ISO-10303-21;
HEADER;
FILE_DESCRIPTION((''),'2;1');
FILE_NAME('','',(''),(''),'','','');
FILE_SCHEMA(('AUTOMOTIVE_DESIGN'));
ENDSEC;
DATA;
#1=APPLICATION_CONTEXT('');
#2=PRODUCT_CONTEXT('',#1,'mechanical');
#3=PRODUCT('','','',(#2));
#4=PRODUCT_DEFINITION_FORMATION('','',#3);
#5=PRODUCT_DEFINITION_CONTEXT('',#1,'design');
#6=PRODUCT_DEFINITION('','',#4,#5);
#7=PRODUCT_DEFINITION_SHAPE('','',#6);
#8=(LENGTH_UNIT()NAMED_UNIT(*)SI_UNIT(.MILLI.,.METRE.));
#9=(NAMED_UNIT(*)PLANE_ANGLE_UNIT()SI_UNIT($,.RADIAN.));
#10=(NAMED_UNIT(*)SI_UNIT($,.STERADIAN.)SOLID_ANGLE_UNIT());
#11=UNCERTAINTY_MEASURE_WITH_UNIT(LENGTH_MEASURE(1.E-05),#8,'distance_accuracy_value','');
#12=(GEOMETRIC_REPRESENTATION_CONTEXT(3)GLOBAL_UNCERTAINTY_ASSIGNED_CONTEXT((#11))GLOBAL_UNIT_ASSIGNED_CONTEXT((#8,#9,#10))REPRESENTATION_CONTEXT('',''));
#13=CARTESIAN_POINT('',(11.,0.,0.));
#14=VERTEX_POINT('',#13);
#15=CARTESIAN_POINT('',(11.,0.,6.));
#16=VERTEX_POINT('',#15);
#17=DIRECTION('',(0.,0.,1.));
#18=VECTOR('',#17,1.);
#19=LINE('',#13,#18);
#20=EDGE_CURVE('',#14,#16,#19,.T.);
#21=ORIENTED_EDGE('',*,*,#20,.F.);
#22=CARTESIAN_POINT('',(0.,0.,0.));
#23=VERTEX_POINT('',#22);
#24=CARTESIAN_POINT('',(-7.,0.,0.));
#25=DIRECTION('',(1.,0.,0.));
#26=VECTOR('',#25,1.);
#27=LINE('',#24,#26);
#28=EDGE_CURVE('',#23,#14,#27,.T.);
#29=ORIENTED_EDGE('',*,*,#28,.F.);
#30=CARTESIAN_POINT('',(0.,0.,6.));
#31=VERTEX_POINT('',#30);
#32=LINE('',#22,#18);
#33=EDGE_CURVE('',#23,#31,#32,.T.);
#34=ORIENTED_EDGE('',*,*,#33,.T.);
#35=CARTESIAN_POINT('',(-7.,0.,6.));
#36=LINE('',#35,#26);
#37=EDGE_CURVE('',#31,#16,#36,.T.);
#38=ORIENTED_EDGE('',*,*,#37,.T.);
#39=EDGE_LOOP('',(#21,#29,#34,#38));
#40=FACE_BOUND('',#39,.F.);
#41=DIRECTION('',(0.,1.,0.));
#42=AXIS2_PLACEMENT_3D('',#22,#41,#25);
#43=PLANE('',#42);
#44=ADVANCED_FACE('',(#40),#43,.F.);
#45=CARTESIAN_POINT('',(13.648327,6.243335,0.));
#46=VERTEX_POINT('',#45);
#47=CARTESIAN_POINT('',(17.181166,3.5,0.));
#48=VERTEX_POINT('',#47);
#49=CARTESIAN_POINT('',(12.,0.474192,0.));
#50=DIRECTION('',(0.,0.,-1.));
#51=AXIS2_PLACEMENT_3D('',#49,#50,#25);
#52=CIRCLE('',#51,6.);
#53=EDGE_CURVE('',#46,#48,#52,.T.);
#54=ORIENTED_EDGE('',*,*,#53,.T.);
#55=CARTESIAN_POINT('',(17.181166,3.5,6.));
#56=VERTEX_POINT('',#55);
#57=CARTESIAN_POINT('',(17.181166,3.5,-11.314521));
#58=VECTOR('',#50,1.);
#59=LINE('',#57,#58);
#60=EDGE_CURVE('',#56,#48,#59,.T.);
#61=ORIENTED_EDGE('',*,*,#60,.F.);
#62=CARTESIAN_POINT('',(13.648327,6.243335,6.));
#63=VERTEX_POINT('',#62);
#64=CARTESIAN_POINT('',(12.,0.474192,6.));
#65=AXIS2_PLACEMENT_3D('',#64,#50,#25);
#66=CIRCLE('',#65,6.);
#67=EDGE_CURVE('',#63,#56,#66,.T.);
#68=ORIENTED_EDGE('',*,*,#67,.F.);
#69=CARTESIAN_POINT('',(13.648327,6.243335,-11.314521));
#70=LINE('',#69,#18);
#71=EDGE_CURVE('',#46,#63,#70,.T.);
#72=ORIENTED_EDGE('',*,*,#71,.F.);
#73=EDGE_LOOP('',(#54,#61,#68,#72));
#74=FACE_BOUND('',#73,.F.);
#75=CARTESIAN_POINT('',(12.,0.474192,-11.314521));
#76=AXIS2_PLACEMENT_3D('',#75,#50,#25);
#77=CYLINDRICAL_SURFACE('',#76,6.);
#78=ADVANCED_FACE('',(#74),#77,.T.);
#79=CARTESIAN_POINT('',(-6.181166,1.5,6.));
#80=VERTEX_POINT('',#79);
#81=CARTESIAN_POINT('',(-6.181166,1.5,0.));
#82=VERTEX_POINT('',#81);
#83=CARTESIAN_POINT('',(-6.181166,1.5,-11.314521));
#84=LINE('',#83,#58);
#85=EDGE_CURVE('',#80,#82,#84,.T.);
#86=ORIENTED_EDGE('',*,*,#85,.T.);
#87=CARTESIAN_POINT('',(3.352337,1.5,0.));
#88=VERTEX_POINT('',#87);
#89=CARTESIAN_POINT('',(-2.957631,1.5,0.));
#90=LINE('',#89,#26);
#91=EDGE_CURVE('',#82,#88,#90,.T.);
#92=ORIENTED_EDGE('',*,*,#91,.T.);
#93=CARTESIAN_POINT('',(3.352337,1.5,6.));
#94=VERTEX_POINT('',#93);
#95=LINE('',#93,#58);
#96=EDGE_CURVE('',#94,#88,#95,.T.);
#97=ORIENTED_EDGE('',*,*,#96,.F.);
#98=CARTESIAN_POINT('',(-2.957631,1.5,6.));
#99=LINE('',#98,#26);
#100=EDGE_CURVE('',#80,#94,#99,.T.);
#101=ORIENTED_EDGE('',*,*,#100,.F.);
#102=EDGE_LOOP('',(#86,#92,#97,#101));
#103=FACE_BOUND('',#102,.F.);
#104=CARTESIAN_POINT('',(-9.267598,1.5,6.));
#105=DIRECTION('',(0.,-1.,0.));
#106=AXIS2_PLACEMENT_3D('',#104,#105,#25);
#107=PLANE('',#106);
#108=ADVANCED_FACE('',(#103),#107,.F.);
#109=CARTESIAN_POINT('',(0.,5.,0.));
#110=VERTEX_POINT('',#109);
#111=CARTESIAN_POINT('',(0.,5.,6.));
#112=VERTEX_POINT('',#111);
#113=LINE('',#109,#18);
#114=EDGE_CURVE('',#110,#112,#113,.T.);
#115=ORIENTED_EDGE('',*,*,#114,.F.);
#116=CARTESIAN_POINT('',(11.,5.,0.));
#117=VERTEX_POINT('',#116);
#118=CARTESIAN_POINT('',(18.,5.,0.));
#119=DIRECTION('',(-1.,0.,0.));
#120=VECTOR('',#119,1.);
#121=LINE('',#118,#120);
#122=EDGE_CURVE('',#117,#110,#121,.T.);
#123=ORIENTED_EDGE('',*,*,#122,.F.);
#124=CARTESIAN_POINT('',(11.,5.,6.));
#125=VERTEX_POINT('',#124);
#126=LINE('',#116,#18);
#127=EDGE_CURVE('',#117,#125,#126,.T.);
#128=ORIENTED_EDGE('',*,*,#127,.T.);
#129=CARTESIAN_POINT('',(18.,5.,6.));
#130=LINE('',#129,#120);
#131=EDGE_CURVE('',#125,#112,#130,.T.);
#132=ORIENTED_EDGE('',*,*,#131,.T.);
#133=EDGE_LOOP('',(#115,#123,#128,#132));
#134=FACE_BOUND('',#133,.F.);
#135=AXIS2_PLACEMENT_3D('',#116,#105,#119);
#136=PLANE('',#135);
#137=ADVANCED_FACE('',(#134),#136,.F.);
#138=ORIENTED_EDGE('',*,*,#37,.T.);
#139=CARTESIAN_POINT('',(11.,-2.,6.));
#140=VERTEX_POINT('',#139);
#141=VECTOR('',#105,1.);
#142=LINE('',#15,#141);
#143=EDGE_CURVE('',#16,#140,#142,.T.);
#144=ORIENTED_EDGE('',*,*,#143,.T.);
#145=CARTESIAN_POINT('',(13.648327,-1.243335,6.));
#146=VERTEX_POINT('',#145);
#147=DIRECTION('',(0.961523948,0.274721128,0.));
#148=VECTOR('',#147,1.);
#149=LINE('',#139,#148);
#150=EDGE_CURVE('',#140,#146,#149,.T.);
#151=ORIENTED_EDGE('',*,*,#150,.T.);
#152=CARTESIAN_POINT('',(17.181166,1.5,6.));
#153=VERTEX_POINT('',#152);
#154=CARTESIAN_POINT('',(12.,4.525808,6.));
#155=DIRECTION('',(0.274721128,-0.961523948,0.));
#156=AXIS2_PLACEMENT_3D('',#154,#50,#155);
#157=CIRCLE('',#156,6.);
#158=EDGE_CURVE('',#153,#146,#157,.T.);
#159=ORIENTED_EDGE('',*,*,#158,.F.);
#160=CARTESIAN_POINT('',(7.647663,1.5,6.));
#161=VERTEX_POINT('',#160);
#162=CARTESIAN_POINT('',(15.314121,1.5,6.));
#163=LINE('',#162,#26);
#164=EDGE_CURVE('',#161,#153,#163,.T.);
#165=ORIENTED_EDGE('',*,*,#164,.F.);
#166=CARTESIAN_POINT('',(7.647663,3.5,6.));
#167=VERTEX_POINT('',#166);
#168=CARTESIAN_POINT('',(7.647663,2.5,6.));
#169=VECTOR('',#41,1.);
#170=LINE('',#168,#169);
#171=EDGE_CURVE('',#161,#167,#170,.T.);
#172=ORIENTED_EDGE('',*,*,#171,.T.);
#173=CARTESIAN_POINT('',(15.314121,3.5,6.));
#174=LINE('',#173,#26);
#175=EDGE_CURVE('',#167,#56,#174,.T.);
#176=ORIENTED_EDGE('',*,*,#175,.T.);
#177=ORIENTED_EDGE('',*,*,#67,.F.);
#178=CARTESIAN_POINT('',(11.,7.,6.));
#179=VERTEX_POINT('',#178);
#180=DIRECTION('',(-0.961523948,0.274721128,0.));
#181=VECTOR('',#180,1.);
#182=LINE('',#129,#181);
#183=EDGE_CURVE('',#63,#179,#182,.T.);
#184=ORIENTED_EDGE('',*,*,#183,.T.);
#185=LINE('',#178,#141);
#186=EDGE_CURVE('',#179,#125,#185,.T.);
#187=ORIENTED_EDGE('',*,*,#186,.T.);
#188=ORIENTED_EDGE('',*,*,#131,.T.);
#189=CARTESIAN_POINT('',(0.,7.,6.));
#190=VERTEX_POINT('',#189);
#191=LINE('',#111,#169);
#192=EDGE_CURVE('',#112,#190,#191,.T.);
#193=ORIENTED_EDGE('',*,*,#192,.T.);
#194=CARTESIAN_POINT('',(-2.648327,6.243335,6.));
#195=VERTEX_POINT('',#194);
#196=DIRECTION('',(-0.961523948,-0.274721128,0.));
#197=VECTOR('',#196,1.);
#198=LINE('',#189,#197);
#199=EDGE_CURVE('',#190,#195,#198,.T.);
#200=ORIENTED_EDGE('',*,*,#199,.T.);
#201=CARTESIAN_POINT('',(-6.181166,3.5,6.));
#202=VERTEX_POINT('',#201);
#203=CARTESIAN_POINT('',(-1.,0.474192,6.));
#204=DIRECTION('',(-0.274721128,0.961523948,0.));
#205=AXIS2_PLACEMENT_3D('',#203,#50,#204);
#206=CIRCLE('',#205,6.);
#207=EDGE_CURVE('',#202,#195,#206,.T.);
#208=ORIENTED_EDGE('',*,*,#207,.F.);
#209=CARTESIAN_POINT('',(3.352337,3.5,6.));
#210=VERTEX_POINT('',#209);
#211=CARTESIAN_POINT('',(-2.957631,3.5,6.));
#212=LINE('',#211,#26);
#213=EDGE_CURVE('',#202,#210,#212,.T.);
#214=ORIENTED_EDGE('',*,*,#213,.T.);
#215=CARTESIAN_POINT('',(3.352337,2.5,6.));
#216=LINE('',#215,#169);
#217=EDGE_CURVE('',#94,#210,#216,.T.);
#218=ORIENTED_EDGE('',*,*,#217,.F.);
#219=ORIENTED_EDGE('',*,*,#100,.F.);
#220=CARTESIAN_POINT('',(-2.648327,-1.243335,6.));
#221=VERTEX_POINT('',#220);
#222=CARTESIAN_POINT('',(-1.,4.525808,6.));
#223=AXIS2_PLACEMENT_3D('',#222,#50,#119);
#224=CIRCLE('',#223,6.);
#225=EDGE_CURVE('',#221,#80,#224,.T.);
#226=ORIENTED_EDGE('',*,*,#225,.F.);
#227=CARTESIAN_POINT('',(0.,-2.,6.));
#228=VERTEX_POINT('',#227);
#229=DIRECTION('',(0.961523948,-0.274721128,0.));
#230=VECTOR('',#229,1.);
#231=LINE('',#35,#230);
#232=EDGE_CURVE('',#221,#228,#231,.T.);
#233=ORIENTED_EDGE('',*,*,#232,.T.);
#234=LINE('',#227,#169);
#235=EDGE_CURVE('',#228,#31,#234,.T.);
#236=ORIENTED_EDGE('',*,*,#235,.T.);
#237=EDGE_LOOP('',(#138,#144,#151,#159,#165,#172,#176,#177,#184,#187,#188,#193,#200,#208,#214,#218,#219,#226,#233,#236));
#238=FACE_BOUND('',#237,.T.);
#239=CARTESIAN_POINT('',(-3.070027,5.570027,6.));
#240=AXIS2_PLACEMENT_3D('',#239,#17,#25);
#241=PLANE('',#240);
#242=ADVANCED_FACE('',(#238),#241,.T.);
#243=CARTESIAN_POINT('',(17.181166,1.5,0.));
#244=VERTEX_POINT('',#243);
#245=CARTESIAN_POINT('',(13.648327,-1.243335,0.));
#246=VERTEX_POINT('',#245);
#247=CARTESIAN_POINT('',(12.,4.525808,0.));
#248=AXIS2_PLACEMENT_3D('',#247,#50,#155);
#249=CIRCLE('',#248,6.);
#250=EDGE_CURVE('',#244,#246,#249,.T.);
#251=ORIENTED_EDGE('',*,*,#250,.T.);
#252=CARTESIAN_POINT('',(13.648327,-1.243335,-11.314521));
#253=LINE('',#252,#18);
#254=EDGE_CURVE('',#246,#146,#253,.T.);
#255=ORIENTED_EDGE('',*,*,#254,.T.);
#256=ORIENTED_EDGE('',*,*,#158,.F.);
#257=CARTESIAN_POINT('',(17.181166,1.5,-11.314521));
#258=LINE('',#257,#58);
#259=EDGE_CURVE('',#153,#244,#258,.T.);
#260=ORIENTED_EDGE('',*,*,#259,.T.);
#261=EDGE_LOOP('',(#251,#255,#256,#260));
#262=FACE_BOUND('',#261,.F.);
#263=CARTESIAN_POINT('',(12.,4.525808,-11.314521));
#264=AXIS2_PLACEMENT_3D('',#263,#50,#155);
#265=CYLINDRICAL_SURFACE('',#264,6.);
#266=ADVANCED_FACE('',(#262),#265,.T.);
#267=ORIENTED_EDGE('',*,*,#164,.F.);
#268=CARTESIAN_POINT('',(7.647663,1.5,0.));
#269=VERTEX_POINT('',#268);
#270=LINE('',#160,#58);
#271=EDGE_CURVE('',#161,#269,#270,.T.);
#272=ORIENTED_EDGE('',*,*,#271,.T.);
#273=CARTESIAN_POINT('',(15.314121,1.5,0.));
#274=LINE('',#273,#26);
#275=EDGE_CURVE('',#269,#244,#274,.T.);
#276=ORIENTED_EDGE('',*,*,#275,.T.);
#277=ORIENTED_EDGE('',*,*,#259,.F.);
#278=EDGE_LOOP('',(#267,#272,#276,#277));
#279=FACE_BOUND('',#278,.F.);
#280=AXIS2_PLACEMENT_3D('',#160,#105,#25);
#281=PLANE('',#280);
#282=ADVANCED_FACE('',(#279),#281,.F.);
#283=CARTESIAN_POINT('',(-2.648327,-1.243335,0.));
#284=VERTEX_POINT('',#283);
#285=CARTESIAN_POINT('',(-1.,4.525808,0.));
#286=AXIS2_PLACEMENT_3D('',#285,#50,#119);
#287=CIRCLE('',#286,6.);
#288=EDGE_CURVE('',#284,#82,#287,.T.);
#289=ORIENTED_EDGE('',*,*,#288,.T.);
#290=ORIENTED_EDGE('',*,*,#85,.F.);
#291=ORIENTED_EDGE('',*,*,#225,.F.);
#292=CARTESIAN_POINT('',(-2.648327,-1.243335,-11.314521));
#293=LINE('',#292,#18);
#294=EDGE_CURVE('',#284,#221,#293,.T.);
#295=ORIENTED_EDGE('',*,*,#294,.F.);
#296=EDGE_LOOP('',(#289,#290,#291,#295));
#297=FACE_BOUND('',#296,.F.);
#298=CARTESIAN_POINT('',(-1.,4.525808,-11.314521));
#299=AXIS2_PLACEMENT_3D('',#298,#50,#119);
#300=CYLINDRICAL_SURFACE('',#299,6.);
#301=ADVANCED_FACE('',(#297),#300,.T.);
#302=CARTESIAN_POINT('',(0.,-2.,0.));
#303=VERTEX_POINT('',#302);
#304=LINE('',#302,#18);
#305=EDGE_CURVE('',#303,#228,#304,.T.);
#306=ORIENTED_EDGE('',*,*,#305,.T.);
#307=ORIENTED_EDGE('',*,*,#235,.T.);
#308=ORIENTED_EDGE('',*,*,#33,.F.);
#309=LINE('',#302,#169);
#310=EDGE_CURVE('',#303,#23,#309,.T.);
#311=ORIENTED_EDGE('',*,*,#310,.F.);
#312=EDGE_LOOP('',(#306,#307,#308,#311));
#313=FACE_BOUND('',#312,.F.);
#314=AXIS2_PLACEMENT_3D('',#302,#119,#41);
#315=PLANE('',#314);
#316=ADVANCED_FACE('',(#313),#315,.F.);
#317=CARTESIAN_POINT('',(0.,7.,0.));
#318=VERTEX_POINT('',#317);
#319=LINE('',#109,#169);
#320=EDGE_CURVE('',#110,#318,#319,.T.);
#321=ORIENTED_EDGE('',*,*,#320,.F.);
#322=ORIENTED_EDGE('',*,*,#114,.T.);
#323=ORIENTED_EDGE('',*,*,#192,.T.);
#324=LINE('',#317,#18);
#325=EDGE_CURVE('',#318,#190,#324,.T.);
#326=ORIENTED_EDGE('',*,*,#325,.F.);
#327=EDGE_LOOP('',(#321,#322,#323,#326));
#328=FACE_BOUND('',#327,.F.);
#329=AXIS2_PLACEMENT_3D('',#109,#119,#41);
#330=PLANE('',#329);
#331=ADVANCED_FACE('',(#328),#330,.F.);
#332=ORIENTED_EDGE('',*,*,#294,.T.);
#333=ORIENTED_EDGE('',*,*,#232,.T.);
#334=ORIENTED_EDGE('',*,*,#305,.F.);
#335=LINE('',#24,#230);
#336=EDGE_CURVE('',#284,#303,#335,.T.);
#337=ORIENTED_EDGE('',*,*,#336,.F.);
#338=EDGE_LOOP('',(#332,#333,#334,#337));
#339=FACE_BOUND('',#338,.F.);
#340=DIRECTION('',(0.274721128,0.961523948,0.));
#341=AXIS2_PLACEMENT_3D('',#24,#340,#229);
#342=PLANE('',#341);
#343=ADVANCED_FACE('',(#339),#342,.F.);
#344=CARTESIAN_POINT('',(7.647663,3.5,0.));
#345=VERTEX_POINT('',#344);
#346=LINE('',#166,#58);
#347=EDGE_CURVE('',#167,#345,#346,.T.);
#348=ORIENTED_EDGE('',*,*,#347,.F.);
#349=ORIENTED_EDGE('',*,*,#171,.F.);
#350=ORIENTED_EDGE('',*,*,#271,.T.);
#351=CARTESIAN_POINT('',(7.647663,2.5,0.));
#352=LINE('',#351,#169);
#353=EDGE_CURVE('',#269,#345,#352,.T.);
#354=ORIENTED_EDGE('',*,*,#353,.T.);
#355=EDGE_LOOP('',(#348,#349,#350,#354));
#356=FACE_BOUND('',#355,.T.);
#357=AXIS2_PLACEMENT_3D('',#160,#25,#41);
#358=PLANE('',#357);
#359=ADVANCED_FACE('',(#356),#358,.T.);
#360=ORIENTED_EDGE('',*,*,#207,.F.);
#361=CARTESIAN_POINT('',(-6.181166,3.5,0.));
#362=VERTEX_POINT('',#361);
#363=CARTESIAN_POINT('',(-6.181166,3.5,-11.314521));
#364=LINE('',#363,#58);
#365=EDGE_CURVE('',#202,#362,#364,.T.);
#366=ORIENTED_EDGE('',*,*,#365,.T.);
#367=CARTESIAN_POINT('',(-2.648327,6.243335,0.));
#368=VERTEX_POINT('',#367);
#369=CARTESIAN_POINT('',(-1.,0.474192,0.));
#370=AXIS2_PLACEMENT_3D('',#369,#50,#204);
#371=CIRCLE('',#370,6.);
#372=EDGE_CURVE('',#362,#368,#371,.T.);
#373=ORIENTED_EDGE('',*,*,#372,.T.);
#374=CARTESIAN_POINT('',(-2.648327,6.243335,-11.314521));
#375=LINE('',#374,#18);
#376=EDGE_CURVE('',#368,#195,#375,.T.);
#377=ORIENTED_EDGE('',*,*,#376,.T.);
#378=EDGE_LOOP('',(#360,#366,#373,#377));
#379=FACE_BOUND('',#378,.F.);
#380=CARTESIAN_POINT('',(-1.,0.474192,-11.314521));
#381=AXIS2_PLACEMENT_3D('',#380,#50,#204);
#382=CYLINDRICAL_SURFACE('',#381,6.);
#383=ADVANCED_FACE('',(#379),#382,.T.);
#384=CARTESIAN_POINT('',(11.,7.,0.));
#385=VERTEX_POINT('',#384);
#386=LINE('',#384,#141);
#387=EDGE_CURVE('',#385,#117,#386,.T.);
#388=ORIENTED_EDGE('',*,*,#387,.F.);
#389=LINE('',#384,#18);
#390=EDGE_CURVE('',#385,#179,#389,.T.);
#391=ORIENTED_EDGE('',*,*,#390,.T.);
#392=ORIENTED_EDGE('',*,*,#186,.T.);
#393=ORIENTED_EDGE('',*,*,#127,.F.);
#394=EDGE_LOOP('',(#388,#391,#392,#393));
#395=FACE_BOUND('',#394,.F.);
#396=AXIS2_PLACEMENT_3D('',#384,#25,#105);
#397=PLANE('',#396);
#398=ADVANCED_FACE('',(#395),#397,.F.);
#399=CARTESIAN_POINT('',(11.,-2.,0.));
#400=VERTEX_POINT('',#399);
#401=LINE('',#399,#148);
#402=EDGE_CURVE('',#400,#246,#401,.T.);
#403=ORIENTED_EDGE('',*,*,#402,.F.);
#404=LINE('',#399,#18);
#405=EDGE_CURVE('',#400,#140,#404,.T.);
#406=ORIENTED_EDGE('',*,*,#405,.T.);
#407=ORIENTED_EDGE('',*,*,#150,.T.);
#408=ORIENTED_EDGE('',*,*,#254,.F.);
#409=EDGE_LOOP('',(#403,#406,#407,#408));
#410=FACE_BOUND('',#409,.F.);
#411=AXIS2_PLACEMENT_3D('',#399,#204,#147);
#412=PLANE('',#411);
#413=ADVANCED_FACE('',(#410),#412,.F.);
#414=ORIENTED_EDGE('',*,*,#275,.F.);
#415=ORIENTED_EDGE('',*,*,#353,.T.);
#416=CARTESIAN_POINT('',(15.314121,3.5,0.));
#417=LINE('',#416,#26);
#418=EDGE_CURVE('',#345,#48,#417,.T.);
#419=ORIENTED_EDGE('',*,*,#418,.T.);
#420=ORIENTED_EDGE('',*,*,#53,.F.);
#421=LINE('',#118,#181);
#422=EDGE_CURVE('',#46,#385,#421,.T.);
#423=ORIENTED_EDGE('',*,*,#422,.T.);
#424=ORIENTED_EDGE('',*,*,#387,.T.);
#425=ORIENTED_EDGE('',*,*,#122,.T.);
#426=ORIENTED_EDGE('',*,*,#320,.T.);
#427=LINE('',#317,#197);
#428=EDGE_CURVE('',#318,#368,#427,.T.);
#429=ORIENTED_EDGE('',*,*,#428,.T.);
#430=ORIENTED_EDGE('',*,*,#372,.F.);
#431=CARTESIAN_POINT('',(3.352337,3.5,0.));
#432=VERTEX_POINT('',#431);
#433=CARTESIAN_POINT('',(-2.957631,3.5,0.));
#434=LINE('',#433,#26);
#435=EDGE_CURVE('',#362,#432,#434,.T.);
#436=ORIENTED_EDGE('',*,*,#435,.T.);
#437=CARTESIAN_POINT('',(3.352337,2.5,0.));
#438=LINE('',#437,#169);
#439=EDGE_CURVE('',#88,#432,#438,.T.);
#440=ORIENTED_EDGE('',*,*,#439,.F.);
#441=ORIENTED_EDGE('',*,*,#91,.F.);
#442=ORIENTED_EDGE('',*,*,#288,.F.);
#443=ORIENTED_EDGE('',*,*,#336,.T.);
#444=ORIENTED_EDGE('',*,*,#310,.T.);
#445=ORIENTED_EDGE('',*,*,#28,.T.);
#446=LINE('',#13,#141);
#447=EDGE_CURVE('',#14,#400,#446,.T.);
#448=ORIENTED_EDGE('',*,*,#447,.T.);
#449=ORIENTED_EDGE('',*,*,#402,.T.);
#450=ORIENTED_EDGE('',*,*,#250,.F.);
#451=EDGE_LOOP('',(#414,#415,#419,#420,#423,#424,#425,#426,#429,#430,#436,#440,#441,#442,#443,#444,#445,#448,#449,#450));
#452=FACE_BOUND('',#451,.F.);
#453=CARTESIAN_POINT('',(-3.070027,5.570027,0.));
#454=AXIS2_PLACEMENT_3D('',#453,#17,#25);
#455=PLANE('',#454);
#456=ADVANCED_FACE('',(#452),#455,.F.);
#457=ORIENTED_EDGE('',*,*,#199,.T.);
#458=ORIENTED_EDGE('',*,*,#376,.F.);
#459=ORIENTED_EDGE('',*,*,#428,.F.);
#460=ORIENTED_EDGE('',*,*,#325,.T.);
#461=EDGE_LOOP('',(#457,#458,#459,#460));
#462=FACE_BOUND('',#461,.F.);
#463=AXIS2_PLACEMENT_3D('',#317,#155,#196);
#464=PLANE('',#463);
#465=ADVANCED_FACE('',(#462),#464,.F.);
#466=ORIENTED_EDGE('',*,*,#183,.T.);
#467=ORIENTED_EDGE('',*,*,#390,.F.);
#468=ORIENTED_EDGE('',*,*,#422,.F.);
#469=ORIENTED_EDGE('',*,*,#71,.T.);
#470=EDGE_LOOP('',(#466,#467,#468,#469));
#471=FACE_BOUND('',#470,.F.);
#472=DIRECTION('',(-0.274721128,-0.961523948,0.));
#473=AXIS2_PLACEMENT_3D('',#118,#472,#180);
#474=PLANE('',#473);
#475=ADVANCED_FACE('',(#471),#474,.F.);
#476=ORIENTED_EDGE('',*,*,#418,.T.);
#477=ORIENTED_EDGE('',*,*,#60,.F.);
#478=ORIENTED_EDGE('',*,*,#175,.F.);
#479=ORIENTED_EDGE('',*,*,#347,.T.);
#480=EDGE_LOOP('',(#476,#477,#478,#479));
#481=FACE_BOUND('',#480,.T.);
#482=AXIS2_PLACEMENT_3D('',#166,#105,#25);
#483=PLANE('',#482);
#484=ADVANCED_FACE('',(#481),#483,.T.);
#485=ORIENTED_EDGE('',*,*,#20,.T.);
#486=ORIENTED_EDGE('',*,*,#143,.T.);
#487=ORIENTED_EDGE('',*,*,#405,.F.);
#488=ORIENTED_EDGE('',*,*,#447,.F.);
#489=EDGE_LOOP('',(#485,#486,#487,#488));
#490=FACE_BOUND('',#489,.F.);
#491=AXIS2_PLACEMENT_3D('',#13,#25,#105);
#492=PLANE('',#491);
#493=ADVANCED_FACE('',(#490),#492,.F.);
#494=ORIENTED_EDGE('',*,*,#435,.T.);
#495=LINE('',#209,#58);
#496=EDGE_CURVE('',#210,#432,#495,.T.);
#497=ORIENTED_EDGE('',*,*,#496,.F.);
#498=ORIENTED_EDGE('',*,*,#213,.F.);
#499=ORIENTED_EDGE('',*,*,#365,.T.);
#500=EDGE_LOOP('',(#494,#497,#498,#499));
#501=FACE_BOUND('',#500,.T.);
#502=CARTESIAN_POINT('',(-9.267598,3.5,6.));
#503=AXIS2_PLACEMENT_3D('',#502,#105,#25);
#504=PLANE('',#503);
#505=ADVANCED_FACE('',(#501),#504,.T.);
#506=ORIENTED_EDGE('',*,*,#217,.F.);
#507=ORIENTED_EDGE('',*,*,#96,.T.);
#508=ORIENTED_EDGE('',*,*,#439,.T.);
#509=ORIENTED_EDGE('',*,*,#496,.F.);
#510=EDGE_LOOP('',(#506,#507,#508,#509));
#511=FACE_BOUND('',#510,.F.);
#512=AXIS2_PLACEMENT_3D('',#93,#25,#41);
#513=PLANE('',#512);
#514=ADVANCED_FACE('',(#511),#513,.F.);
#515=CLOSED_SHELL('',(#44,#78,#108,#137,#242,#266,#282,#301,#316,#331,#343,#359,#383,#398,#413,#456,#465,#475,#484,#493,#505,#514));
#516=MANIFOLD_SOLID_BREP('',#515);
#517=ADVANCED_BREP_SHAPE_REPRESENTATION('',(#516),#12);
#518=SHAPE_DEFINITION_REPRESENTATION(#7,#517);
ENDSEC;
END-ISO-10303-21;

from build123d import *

# Parameters (mm, degrees)
F1_DEPTH    = 6
F2_T1_DEPTH = 28.6290423826
F3_W        = 12.6199351555
F3_H        = 2
F3_W_2      = 15.3329153147
F4_DEPTH    = 6


# Not quite as in the source:
# - a fillet or chamfer that OpenCascade refuses, or shapes differently, is made with other operations: its cross-section is extruded or revolved along the edge and cut away or added


with BuildPart() as f1:
    # F0 (on Top) → F1 (new body)
    with BuildSketch(Plane.XY):
        Polygon((0, 7), (-7, 5), (0, 5), align=None)
        Polygon((0, 5), (-7, 5), (-7, 0), (0, 0), (11, 0), (18, 0), (18, 5), (11, 5), align=None)
        Polygon((0, 0), (-7, 0), (0, -2), align=None)
        Polygon((11, 7), (11, 5), (18, 5), align=None)
        Polygon((18, 0), (11, 0), (11, -2), align=None)
    extrude(amount=F1_DEPTH)

    # F2: fillet of radius 6 on 4 edges, made by hand

    # F2_s2 → F2_t1 (cut)
    with BuildSketch(Plane.XY.offset(-11.3145211913)):
        with BuildLine():
            ThreePointArc((-2.6483267674, 6.2433352093), (-5.7900918887, 4.0873646023), (-7, 0.4741915235))
            Line((-7, 0.4741915235), (-7, 5))
            Line((-7, 5), (-2.6483267674, 6.2433352093))
        make_face()
        with BuildLine():
            ThreePointArc((-7, 4.5258084765), (-5.7900918887, 0.9126353977), (-2.6483267674, -1.2433352093))
            Line((-2.6483267674, -1.2433352093), (-7, 0))
            Line((-7, 0), (-7, 4.5258084765))
        make_face()
        with BuildLine():
            ThreePointArc((18, 0.4741915235), (16.7900918887, 4.0873646023), (13.6483267674, 6.2433352093))
            Line((13.6483267674, 6.2433352093), (18, 5))
            Line((18, 5), (18, 0.4741915235))
        make_face()
        with BuildLine():
            ThreePointArc((13.6483267674, -1.2433352093), (16.7900918887, 0.9126353977), (18, 4.5258084765))
            Line((18, 4.5258084765), (18, 0))
            Line((18, 0), (13.6483267674, -1.2433352093))
        make_face()
    extrude(amount=F2_T1_DEPTH, mode=Mode.SUBTRACT)

    # F3 (on face) → F4 (cut)
    with BuildSketch(Plane.XY.offset(6)):
        with Locations((-2.9576308128, 2.5)):
            Rectangle(F3_W, F3_H)
        with Locations((15.3141208924, 2.5)):
            Rectangle(F3_W_2, F3_H)
    extrude(amount=-F4_DEPTH, mode=Mode.SUBTRACT)


solid = f1.part
